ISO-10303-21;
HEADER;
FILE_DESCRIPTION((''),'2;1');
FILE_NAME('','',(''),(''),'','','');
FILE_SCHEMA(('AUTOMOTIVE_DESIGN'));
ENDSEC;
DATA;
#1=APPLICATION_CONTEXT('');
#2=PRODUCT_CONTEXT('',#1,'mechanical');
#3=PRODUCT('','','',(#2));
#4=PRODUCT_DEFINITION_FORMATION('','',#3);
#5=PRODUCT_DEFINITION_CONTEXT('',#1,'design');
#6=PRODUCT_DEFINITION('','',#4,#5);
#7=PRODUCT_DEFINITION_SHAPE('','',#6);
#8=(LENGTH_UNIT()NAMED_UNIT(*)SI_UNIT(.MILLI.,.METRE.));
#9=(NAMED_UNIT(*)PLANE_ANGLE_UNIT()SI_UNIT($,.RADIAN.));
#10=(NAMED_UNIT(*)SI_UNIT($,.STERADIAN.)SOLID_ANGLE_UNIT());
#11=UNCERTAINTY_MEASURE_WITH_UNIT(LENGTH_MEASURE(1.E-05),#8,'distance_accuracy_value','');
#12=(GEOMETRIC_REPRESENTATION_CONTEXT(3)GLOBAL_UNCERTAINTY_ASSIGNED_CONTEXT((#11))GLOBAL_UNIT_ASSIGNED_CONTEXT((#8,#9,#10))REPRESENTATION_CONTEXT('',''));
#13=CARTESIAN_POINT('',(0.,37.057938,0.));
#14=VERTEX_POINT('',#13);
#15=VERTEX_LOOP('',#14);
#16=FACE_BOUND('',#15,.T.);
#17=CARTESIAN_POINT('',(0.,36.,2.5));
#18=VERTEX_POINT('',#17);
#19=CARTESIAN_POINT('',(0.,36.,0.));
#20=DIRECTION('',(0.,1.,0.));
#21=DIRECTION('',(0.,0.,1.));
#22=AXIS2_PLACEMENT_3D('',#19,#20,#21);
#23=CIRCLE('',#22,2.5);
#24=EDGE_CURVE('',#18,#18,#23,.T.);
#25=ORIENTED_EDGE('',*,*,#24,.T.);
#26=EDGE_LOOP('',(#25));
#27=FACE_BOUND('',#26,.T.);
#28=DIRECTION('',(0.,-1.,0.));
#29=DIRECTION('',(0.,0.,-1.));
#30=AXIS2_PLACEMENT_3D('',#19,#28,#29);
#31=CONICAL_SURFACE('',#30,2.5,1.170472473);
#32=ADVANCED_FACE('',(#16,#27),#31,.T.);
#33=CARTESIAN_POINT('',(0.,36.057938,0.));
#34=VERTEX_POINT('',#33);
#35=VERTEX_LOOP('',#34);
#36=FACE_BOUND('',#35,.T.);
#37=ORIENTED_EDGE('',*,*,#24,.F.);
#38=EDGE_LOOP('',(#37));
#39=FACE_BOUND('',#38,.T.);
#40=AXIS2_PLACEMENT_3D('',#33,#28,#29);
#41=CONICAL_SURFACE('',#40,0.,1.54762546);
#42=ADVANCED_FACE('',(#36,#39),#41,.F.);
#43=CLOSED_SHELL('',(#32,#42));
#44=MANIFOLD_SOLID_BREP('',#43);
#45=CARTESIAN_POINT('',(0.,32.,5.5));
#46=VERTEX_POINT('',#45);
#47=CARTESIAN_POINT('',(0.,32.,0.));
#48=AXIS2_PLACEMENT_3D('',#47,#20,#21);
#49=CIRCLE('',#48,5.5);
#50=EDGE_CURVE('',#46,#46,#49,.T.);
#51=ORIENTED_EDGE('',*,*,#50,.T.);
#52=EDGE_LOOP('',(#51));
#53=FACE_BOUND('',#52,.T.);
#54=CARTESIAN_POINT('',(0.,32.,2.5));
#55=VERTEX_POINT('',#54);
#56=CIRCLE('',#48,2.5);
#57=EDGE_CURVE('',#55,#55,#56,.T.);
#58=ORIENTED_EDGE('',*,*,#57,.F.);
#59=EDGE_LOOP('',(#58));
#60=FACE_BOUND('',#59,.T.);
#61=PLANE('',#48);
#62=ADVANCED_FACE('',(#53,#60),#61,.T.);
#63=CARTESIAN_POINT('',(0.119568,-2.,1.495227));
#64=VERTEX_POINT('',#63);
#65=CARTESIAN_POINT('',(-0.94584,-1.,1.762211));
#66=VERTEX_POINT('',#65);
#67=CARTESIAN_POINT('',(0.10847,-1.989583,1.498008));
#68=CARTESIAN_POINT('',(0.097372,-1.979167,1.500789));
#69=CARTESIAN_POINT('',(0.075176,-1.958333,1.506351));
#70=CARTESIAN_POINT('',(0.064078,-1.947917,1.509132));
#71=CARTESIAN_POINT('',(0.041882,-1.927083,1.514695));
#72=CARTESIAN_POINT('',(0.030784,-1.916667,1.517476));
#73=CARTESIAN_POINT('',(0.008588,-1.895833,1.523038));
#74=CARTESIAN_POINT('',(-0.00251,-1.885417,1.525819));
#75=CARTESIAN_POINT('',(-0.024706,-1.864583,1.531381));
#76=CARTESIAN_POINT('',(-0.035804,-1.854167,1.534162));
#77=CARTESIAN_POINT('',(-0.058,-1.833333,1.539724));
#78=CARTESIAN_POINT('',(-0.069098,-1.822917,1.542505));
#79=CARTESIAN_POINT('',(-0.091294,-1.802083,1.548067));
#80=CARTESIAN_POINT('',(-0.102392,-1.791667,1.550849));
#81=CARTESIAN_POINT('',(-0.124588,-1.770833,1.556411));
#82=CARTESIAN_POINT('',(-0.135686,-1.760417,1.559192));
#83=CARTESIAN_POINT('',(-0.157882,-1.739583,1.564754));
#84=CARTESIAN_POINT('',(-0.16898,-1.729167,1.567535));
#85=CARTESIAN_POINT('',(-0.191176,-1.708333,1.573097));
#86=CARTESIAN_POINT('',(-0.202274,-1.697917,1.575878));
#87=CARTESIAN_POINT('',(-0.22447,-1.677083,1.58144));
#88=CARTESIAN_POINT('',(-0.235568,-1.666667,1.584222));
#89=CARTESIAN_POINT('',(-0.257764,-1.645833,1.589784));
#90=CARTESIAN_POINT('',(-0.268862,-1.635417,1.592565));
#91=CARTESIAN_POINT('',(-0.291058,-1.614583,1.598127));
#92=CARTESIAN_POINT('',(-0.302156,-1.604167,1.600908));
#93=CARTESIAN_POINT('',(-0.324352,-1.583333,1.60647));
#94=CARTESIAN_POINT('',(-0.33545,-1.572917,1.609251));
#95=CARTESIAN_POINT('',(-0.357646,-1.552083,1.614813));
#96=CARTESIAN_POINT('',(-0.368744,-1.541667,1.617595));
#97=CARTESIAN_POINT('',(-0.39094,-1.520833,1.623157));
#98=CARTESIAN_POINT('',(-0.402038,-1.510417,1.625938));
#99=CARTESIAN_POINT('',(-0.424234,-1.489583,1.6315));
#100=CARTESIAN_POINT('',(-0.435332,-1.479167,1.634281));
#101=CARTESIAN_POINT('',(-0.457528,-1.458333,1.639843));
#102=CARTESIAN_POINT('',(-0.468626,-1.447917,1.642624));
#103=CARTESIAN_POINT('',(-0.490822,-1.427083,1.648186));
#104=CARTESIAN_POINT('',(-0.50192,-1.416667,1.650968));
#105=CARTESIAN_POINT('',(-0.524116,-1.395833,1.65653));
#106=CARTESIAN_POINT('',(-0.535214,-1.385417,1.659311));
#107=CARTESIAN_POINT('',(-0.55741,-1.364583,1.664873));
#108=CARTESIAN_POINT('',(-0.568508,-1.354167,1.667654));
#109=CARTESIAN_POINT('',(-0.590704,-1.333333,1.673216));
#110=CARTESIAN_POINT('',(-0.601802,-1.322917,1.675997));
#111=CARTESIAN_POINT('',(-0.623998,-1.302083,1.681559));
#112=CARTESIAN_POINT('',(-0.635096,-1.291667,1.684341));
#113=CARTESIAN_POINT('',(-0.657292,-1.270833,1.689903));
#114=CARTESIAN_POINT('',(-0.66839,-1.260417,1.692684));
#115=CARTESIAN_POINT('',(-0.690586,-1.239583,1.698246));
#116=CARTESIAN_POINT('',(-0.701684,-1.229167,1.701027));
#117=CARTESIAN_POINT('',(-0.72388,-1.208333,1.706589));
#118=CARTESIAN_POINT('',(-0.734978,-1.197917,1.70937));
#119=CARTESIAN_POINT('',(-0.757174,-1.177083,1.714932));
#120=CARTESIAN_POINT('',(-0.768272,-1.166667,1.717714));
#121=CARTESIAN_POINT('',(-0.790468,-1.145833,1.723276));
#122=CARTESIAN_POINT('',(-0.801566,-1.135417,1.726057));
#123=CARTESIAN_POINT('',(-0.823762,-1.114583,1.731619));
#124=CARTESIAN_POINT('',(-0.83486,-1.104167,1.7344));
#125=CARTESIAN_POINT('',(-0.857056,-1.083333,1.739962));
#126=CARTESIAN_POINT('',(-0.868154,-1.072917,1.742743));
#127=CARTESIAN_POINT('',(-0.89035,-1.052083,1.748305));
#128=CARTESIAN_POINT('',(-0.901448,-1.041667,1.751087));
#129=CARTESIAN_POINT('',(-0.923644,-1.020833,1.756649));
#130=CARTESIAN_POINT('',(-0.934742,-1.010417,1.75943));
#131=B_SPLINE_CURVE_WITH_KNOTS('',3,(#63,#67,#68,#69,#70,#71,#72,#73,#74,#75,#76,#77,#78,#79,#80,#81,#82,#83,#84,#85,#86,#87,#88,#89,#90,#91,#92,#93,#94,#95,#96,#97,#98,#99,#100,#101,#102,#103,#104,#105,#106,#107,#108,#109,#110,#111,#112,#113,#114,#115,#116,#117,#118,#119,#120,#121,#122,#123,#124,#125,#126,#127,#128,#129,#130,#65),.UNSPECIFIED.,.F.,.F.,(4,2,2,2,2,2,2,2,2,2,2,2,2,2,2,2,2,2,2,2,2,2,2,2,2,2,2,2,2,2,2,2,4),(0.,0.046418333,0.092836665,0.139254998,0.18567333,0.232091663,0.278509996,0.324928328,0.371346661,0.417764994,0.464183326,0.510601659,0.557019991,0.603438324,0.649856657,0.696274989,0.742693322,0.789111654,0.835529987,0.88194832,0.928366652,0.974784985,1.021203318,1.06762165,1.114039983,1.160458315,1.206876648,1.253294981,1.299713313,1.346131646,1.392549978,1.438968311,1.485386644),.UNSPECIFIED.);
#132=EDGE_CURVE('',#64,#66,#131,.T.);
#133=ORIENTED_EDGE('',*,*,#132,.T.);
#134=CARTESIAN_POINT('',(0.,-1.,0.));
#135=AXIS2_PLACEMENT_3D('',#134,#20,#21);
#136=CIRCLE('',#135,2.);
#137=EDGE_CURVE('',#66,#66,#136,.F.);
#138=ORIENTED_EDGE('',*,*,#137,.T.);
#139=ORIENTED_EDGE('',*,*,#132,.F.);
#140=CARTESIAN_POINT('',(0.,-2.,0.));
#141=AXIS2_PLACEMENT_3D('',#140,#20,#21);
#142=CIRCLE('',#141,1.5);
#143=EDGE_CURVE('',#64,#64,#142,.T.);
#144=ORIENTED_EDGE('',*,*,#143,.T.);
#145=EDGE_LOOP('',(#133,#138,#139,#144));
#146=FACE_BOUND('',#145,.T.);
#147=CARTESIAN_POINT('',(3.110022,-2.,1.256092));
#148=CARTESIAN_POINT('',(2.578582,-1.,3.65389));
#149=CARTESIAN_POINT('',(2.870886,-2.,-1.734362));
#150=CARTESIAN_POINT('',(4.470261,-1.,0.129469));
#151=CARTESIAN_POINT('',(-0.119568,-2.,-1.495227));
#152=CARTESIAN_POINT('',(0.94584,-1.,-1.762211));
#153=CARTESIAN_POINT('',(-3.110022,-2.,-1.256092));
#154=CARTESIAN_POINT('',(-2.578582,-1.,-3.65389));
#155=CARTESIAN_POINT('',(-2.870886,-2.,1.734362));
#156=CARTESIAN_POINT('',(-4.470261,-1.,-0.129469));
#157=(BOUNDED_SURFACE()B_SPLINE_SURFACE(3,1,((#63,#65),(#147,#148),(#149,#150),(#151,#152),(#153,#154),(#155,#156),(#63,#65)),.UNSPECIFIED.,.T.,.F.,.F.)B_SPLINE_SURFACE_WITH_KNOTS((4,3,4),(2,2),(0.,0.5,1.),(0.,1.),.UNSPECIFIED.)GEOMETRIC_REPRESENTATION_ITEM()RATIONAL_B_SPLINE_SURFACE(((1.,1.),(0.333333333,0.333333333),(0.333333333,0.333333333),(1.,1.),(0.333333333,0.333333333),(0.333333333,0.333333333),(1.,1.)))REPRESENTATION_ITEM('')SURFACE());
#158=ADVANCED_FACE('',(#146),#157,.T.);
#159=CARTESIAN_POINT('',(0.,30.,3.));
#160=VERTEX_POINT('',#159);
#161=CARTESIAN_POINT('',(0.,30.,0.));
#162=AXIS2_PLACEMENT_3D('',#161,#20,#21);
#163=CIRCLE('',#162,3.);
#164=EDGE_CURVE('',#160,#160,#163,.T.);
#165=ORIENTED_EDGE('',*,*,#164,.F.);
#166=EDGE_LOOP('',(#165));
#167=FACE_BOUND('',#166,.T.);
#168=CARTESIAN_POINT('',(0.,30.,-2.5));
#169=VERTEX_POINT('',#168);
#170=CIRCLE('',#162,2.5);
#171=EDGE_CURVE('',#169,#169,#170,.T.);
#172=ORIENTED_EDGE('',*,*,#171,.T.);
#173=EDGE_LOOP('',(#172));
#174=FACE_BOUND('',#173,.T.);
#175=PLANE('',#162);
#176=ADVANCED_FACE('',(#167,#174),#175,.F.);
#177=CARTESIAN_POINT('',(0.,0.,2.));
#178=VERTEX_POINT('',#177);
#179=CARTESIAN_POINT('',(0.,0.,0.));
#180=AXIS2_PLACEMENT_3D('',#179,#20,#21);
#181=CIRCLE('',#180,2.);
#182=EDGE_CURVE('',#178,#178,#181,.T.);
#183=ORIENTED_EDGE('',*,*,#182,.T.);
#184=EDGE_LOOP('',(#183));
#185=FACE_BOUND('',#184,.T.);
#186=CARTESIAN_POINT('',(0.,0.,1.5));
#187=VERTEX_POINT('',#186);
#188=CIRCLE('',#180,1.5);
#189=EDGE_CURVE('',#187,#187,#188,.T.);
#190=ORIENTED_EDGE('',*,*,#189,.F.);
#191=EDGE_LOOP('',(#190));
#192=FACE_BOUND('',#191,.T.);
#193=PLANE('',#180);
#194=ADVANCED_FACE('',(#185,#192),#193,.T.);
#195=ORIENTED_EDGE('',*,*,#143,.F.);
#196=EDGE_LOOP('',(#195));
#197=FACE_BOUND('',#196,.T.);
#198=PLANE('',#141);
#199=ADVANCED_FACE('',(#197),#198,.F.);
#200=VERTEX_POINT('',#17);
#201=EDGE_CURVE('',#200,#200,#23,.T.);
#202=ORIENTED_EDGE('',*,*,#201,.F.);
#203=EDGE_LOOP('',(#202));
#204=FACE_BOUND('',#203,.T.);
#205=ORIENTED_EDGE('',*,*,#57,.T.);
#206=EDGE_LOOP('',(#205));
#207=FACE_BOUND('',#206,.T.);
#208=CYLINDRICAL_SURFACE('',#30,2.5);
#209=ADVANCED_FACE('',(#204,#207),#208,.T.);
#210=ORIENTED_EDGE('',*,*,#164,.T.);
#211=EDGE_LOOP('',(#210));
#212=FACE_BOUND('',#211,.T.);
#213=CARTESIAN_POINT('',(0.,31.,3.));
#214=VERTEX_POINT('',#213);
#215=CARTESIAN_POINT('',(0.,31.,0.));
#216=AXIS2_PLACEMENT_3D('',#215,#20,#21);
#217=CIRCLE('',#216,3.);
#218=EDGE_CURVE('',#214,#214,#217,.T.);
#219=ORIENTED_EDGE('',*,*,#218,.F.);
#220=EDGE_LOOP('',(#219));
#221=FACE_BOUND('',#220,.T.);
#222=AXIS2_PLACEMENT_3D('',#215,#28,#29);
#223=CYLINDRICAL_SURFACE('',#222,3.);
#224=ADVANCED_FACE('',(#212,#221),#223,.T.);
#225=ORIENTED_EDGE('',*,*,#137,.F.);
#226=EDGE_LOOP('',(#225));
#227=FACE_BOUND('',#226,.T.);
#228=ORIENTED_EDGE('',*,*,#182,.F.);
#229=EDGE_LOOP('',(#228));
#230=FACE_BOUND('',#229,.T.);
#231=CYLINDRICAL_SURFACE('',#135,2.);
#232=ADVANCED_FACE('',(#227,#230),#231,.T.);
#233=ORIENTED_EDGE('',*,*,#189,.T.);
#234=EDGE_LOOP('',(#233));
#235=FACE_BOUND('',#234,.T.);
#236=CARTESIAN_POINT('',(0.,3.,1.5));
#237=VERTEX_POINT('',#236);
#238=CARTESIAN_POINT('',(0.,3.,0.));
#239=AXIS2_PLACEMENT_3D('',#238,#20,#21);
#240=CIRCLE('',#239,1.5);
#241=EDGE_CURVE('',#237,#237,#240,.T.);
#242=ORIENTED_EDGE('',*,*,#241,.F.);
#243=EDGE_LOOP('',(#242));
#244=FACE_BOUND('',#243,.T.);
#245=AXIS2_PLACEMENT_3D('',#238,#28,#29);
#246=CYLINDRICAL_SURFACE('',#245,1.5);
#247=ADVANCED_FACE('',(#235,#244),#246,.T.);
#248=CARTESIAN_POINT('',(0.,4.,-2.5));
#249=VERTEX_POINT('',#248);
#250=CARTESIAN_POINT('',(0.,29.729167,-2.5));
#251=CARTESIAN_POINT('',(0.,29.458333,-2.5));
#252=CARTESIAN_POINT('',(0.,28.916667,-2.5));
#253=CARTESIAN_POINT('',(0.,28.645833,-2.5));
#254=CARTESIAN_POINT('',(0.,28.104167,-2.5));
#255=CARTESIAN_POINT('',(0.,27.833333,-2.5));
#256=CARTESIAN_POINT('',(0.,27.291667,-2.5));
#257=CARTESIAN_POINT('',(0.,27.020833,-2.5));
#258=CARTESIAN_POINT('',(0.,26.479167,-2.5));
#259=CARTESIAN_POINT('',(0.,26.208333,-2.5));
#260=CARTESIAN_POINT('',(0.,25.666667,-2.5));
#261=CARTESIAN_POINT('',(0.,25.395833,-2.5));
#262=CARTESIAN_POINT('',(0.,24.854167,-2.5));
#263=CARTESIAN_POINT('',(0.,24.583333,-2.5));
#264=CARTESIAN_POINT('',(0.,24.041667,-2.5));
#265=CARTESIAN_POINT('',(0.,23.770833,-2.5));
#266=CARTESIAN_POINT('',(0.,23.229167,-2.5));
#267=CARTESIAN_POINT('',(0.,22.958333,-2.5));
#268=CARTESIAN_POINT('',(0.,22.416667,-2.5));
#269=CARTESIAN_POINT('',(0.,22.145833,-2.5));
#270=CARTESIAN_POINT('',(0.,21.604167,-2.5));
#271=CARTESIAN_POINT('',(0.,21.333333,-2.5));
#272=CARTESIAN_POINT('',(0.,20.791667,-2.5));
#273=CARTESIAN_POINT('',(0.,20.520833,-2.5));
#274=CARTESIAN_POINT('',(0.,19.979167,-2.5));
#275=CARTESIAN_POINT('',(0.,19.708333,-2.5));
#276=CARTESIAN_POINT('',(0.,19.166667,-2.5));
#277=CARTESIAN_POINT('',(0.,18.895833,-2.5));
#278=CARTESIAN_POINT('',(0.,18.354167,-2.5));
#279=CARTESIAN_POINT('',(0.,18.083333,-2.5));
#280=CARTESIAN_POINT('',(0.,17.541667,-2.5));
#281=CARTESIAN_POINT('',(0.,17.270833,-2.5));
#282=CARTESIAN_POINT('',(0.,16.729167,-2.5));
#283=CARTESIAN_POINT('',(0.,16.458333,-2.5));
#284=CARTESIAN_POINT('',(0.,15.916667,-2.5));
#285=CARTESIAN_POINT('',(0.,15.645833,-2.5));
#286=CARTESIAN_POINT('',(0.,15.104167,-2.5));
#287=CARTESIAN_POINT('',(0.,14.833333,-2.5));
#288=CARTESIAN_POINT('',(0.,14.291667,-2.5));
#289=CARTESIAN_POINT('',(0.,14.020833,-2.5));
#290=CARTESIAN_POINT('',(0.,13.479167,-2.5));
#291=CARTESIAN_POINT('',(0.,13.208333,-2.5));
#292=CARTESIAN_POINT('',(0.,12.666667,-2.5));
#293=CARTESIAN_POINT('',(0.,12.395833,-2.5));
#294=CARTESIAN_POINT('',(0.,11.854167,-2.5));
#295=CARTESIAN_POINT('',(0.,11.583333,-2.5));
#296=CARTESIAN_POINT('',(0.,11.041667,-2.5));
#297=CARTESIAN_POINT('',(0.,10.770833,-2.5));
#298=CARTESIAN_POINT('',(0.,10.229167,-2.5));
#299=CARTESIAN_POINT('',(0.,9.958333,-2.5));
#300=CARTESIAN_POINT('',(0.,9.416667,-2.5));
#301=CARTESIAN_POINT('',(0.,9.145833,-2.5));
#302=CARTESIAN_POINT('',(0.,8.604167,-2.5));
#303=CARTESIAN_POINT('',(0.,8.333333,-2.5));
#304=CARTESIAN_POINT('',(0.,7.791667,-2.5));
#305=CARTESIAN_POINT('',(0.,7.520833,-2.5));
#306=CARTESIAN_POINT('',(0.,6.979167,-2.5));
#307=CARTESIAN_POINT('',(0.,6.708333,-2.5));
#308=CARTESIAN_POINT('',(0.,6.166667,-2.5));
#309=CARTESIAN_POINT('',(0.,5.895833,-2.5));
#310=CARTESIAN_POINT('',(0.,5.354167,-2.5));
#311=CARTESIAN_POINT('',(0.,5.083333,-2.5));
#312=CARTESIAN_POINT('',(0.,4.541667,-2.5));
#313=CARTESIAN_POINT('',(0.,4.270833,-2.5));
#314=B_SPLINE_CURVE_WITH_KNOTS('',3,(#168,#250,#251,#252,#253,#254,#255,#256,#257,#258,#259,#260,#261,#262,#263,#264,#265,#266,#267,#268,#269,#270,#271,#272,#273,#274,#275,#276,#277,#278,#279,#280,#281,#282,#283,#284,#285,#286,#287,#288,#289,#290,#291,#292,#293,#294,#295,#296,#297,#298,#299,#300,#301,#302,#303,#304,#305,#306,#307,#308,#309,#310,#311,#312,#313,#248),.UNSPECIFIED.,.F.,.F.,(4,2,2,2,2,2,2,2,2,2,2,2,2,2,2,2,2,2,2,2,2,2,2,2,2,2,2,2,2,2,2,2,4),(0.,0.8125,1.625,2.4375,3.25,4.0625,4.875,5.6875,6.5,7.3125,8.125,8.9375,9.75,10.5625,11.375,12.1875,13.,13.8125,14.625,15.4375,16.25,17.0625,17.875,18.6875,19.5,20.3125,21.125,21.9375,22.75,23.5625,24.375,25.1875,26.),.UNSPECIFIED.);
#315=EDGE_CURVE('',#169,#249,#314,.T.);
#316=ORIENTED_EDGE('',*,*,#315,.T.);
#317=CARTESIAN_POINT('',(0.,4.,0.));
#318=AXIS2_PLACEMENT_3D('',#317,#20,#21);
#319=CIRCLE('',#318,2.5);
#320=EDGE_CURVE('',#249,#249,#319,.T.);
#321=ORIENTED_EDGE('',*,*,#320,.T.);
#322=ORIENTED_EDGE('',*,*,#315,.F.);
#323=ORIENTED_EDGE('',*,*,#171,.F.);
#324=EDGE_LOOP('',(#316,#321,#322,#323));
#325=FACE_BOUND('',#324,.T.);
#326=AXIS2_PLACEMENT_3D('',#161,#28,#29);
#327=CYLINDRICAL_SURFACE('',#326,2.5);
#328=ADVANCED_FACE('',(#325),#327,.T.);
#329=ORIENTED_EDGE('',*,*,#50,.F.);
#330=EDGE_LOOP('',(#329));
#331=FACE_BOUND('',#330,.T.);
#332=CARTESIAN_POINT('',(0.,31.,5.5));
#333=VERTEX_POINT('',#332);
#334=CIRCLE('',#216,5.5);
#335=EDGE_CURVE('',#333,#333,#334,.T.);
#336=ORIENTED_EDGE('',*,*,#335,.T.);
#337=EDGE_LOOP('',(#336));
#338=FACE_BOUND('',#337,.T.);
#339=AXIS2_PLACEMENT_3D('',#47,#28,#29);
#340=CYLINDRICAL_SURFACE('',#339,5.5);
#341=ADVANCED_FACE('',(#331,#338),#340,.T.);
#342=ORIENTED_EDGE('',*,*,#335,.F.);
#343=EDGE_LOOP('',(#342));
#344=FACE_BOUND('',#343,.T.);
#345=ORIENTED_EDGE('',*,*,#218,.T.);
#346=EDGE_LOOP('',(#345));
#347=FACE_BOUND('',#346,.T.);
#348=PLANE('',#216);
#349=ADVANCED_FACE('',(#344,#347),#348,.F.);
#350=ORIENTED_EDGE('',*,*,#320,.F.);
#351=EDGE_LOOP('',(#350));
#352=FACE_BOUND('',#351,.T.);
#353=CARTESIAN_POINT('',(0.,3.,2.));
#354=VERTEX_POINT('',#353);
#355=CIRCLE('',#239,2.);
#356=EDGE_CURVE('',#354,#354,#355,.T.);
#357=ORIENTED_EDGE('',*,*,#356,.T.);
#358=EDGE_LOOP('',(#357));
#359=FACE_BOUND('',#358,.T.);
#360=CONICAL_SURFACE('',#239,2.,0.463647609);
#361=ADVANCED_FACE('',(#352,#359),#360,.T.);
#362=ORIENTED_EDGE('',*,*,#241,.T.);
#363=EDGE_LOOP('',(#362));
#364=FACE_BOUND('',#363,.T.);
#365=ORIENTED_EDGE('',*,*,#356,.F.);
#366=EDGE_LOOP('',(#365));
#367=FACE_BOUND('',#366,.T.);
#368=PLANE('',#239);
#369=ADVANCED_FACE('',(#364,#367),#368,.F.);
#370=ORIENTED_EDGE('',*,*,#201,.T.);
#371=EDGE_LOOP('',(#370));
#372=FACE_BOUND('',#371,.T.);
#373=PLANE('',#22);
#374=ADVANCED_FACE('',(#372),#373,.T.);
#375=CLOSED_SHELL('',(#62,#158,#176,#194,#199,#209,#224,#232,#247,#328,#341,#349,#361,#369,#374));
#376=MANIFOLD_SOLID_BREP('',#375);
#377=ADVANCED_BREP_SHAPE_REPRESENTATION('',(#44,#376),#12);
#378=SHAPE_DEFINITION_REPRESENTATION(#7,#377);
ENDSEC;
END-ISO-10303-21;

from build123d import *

# Parameters (mm, degrees)
SKETCH1_R           = 2
BOSS_EXTRUDE1_DEPTH = 1
SKETCH3_R           = 1.5
BOSS_EXTRUDE2_DEPTH = 3
SKETCH4_R           = 2
SKETCH5_R           = 2.5
SKETCH5_2_R         = 2.5
BOSS_EXTRUDE4_DEPTH = 26
SKETCH9_R           = 3
BOSS_EXTRUDE5_DEPTH = 1
SKETCH10_R          = 5.5
BOSS_EXTRUDE6_DEPTH = 1
SKETCH11_R          = 2.5
BOSS_EXTRUDE7_DEPTH = 4


with BuildPart() as part:
    # Sketch1 → Boss-Extrude1 (new body)
    with BuildSketch(Plane(origin=(0, 0, 0), x_dir=(1, 0, 0), z_dir=(0, 1, 0))):
        with Locations(Location((0, 0, 0), (0, 0, 270))):
            Circle(SKETCH1_R)
    extrude(amount=-BOSS_EXTRUDE1_DEPTH)

    # Loft1: read off the stored shape, not the designer's step
    # Loft1: loft between two sections, ruled curve by curve
    loft1_from = [
        Edge.make_bspline([(0.119567695, -2, 1.495226928), (3.110021551, -2, 1.256091538), (2.870886161, -2, -1.734362318), (-0.119567695, -2, -1.495226928), (-3.110021551, -2, -1.256091538), (-2.870886161, -2, 1.734362318), (0.119567695, -2, 1.495226928)], [0, 0, 0, 0, 0.5, 0.5, 0.5, 1, 1, 1, 1], 3, [1, 0.333333333, 0.333333333, 1, 0.333333333, 0.333333333, 1]),
    ]
    loft1_to = [
        Edge.make_bspline([(-0.945839766, -1, 1.762210866), (2.578581967, -1, 3.653890398), (4.470261498, -1, 0.129468665), (0.945839766, -1, -1.762210866), (-2.578581967, -1, -3.653890398), (-4.470261498, -1, -0.129468665), (-0.945839766, -1, 1.762210866)], [0, 0, 0, 0, 0.5, 0.5, 0.5, 1, 1, 1, 1], 3, [1, 0.333333333, 0.333333333, 1, 0.333333333, 0.333333333, 1]),
    ]
    loft1 = Solid(Shell([*[Face.make_surface_from_curves(loft1_from[k], loft1_to[k]) for k in range(1)], Face(Wire(loft1_from)), Face(Wire(loft1_to))]))
    add(loft1)

    # Sketch3 → Boss-Extrude2 (add)
    with BuildSketch(Plane(origin=(0, 0, 0), x_dir=(1, 0, 0), z_dir=(0, 1, 0))):
        with Locations(Location((0, 0, 0), (0, 0, 270))):
            Circle(SKETCH3_R)
    extrude(amount=BOSS_EXTRUDE2_DEPTH)

    # Sketch4 → Loft2 section 0
    with BuildSketch(Plane(origin=(0, 3, 0), x_dir=(1, 0, 0), z_dir=(0, 1, 0))):
        Circle(SKETCH4_R)
    # Sketch5 → Loft2 section 1
    with BuildSketch(Plane(origin=(0, 4, 0), x_dir=(1, 0, 0), z_dir=(0, 1, 0))):
        Circle(SKETCH5_R)
    loft()

    # Sketch5<2> → Boss-Extrude4 (add)
    with BuildSketch(Plane(origin=(0, 4, 0), x_dir=(1, 0, 0), z_dir=(0, 1, 0))):
        with Locations(Location((0, 0, 0), (0, 0, 90))):
            Circle(SKETCH5_2_R)
    extrude(amount=BOSS_EXTRUDE4_DEPTH)

    # Sketch9 → Boss-Extrude5 (add)
    with BuildSketch(Plane(origin=(0, 30, 0), x_dir=(1, 0, 0), z_dir=(0, 1, 0))):
        with Locations(Location((0, 0, 0), (0, 0, 270))):
            Circle(SKETCH9_R)
    extrude(amount=BOSS_EXTRUDE5_DEPTH)

    # Sketch10 → Boss-Extrude6 (add)
    with BuildSketch(Plane(origin=(0, 31, 0), x_dir=(1, 0, 0), z_dir=(0, 1, 0))):
        with Locations(Location((0, 0, 0), (0, 0, 270))):
            Circle(SKETCH10_R)
    extrude(amount=BOSS_EXTRUDE6_DEPTH)

    # Sketch11 → Boss-Extrude7 (add)
    with BuildSketch(Plane(origin=(0, 32, 0), x_dir=(1, 0, 0), z_dir=(0, 1, 0))):
        with Locations(Location((0, 0, 0), (0, 0, 90))):
            Circle(SKETCH11_R)
    extrude(amount=BOSS_EXTRUDE7_DEPTH)


with BuildPart() as body_2:
    # Sketch13 → Revolve3 (revolve)
    with BuildSketch(Plane.XY, mode=Mode.PRIVATE) as revolve3_sk:
        Polygon((0, 36.057937537), (0, 37.057937537), (2.5, 36), align=None)
    revolve(revolve3_sk.sketch.rotate(Axis((0, 43.722789751, 0), (0, -1, 0)), 270), axis=Axis((0, 43.722789751, 0), (0, -1, 0)))


solid = Compound([part.part, body_2.part])
